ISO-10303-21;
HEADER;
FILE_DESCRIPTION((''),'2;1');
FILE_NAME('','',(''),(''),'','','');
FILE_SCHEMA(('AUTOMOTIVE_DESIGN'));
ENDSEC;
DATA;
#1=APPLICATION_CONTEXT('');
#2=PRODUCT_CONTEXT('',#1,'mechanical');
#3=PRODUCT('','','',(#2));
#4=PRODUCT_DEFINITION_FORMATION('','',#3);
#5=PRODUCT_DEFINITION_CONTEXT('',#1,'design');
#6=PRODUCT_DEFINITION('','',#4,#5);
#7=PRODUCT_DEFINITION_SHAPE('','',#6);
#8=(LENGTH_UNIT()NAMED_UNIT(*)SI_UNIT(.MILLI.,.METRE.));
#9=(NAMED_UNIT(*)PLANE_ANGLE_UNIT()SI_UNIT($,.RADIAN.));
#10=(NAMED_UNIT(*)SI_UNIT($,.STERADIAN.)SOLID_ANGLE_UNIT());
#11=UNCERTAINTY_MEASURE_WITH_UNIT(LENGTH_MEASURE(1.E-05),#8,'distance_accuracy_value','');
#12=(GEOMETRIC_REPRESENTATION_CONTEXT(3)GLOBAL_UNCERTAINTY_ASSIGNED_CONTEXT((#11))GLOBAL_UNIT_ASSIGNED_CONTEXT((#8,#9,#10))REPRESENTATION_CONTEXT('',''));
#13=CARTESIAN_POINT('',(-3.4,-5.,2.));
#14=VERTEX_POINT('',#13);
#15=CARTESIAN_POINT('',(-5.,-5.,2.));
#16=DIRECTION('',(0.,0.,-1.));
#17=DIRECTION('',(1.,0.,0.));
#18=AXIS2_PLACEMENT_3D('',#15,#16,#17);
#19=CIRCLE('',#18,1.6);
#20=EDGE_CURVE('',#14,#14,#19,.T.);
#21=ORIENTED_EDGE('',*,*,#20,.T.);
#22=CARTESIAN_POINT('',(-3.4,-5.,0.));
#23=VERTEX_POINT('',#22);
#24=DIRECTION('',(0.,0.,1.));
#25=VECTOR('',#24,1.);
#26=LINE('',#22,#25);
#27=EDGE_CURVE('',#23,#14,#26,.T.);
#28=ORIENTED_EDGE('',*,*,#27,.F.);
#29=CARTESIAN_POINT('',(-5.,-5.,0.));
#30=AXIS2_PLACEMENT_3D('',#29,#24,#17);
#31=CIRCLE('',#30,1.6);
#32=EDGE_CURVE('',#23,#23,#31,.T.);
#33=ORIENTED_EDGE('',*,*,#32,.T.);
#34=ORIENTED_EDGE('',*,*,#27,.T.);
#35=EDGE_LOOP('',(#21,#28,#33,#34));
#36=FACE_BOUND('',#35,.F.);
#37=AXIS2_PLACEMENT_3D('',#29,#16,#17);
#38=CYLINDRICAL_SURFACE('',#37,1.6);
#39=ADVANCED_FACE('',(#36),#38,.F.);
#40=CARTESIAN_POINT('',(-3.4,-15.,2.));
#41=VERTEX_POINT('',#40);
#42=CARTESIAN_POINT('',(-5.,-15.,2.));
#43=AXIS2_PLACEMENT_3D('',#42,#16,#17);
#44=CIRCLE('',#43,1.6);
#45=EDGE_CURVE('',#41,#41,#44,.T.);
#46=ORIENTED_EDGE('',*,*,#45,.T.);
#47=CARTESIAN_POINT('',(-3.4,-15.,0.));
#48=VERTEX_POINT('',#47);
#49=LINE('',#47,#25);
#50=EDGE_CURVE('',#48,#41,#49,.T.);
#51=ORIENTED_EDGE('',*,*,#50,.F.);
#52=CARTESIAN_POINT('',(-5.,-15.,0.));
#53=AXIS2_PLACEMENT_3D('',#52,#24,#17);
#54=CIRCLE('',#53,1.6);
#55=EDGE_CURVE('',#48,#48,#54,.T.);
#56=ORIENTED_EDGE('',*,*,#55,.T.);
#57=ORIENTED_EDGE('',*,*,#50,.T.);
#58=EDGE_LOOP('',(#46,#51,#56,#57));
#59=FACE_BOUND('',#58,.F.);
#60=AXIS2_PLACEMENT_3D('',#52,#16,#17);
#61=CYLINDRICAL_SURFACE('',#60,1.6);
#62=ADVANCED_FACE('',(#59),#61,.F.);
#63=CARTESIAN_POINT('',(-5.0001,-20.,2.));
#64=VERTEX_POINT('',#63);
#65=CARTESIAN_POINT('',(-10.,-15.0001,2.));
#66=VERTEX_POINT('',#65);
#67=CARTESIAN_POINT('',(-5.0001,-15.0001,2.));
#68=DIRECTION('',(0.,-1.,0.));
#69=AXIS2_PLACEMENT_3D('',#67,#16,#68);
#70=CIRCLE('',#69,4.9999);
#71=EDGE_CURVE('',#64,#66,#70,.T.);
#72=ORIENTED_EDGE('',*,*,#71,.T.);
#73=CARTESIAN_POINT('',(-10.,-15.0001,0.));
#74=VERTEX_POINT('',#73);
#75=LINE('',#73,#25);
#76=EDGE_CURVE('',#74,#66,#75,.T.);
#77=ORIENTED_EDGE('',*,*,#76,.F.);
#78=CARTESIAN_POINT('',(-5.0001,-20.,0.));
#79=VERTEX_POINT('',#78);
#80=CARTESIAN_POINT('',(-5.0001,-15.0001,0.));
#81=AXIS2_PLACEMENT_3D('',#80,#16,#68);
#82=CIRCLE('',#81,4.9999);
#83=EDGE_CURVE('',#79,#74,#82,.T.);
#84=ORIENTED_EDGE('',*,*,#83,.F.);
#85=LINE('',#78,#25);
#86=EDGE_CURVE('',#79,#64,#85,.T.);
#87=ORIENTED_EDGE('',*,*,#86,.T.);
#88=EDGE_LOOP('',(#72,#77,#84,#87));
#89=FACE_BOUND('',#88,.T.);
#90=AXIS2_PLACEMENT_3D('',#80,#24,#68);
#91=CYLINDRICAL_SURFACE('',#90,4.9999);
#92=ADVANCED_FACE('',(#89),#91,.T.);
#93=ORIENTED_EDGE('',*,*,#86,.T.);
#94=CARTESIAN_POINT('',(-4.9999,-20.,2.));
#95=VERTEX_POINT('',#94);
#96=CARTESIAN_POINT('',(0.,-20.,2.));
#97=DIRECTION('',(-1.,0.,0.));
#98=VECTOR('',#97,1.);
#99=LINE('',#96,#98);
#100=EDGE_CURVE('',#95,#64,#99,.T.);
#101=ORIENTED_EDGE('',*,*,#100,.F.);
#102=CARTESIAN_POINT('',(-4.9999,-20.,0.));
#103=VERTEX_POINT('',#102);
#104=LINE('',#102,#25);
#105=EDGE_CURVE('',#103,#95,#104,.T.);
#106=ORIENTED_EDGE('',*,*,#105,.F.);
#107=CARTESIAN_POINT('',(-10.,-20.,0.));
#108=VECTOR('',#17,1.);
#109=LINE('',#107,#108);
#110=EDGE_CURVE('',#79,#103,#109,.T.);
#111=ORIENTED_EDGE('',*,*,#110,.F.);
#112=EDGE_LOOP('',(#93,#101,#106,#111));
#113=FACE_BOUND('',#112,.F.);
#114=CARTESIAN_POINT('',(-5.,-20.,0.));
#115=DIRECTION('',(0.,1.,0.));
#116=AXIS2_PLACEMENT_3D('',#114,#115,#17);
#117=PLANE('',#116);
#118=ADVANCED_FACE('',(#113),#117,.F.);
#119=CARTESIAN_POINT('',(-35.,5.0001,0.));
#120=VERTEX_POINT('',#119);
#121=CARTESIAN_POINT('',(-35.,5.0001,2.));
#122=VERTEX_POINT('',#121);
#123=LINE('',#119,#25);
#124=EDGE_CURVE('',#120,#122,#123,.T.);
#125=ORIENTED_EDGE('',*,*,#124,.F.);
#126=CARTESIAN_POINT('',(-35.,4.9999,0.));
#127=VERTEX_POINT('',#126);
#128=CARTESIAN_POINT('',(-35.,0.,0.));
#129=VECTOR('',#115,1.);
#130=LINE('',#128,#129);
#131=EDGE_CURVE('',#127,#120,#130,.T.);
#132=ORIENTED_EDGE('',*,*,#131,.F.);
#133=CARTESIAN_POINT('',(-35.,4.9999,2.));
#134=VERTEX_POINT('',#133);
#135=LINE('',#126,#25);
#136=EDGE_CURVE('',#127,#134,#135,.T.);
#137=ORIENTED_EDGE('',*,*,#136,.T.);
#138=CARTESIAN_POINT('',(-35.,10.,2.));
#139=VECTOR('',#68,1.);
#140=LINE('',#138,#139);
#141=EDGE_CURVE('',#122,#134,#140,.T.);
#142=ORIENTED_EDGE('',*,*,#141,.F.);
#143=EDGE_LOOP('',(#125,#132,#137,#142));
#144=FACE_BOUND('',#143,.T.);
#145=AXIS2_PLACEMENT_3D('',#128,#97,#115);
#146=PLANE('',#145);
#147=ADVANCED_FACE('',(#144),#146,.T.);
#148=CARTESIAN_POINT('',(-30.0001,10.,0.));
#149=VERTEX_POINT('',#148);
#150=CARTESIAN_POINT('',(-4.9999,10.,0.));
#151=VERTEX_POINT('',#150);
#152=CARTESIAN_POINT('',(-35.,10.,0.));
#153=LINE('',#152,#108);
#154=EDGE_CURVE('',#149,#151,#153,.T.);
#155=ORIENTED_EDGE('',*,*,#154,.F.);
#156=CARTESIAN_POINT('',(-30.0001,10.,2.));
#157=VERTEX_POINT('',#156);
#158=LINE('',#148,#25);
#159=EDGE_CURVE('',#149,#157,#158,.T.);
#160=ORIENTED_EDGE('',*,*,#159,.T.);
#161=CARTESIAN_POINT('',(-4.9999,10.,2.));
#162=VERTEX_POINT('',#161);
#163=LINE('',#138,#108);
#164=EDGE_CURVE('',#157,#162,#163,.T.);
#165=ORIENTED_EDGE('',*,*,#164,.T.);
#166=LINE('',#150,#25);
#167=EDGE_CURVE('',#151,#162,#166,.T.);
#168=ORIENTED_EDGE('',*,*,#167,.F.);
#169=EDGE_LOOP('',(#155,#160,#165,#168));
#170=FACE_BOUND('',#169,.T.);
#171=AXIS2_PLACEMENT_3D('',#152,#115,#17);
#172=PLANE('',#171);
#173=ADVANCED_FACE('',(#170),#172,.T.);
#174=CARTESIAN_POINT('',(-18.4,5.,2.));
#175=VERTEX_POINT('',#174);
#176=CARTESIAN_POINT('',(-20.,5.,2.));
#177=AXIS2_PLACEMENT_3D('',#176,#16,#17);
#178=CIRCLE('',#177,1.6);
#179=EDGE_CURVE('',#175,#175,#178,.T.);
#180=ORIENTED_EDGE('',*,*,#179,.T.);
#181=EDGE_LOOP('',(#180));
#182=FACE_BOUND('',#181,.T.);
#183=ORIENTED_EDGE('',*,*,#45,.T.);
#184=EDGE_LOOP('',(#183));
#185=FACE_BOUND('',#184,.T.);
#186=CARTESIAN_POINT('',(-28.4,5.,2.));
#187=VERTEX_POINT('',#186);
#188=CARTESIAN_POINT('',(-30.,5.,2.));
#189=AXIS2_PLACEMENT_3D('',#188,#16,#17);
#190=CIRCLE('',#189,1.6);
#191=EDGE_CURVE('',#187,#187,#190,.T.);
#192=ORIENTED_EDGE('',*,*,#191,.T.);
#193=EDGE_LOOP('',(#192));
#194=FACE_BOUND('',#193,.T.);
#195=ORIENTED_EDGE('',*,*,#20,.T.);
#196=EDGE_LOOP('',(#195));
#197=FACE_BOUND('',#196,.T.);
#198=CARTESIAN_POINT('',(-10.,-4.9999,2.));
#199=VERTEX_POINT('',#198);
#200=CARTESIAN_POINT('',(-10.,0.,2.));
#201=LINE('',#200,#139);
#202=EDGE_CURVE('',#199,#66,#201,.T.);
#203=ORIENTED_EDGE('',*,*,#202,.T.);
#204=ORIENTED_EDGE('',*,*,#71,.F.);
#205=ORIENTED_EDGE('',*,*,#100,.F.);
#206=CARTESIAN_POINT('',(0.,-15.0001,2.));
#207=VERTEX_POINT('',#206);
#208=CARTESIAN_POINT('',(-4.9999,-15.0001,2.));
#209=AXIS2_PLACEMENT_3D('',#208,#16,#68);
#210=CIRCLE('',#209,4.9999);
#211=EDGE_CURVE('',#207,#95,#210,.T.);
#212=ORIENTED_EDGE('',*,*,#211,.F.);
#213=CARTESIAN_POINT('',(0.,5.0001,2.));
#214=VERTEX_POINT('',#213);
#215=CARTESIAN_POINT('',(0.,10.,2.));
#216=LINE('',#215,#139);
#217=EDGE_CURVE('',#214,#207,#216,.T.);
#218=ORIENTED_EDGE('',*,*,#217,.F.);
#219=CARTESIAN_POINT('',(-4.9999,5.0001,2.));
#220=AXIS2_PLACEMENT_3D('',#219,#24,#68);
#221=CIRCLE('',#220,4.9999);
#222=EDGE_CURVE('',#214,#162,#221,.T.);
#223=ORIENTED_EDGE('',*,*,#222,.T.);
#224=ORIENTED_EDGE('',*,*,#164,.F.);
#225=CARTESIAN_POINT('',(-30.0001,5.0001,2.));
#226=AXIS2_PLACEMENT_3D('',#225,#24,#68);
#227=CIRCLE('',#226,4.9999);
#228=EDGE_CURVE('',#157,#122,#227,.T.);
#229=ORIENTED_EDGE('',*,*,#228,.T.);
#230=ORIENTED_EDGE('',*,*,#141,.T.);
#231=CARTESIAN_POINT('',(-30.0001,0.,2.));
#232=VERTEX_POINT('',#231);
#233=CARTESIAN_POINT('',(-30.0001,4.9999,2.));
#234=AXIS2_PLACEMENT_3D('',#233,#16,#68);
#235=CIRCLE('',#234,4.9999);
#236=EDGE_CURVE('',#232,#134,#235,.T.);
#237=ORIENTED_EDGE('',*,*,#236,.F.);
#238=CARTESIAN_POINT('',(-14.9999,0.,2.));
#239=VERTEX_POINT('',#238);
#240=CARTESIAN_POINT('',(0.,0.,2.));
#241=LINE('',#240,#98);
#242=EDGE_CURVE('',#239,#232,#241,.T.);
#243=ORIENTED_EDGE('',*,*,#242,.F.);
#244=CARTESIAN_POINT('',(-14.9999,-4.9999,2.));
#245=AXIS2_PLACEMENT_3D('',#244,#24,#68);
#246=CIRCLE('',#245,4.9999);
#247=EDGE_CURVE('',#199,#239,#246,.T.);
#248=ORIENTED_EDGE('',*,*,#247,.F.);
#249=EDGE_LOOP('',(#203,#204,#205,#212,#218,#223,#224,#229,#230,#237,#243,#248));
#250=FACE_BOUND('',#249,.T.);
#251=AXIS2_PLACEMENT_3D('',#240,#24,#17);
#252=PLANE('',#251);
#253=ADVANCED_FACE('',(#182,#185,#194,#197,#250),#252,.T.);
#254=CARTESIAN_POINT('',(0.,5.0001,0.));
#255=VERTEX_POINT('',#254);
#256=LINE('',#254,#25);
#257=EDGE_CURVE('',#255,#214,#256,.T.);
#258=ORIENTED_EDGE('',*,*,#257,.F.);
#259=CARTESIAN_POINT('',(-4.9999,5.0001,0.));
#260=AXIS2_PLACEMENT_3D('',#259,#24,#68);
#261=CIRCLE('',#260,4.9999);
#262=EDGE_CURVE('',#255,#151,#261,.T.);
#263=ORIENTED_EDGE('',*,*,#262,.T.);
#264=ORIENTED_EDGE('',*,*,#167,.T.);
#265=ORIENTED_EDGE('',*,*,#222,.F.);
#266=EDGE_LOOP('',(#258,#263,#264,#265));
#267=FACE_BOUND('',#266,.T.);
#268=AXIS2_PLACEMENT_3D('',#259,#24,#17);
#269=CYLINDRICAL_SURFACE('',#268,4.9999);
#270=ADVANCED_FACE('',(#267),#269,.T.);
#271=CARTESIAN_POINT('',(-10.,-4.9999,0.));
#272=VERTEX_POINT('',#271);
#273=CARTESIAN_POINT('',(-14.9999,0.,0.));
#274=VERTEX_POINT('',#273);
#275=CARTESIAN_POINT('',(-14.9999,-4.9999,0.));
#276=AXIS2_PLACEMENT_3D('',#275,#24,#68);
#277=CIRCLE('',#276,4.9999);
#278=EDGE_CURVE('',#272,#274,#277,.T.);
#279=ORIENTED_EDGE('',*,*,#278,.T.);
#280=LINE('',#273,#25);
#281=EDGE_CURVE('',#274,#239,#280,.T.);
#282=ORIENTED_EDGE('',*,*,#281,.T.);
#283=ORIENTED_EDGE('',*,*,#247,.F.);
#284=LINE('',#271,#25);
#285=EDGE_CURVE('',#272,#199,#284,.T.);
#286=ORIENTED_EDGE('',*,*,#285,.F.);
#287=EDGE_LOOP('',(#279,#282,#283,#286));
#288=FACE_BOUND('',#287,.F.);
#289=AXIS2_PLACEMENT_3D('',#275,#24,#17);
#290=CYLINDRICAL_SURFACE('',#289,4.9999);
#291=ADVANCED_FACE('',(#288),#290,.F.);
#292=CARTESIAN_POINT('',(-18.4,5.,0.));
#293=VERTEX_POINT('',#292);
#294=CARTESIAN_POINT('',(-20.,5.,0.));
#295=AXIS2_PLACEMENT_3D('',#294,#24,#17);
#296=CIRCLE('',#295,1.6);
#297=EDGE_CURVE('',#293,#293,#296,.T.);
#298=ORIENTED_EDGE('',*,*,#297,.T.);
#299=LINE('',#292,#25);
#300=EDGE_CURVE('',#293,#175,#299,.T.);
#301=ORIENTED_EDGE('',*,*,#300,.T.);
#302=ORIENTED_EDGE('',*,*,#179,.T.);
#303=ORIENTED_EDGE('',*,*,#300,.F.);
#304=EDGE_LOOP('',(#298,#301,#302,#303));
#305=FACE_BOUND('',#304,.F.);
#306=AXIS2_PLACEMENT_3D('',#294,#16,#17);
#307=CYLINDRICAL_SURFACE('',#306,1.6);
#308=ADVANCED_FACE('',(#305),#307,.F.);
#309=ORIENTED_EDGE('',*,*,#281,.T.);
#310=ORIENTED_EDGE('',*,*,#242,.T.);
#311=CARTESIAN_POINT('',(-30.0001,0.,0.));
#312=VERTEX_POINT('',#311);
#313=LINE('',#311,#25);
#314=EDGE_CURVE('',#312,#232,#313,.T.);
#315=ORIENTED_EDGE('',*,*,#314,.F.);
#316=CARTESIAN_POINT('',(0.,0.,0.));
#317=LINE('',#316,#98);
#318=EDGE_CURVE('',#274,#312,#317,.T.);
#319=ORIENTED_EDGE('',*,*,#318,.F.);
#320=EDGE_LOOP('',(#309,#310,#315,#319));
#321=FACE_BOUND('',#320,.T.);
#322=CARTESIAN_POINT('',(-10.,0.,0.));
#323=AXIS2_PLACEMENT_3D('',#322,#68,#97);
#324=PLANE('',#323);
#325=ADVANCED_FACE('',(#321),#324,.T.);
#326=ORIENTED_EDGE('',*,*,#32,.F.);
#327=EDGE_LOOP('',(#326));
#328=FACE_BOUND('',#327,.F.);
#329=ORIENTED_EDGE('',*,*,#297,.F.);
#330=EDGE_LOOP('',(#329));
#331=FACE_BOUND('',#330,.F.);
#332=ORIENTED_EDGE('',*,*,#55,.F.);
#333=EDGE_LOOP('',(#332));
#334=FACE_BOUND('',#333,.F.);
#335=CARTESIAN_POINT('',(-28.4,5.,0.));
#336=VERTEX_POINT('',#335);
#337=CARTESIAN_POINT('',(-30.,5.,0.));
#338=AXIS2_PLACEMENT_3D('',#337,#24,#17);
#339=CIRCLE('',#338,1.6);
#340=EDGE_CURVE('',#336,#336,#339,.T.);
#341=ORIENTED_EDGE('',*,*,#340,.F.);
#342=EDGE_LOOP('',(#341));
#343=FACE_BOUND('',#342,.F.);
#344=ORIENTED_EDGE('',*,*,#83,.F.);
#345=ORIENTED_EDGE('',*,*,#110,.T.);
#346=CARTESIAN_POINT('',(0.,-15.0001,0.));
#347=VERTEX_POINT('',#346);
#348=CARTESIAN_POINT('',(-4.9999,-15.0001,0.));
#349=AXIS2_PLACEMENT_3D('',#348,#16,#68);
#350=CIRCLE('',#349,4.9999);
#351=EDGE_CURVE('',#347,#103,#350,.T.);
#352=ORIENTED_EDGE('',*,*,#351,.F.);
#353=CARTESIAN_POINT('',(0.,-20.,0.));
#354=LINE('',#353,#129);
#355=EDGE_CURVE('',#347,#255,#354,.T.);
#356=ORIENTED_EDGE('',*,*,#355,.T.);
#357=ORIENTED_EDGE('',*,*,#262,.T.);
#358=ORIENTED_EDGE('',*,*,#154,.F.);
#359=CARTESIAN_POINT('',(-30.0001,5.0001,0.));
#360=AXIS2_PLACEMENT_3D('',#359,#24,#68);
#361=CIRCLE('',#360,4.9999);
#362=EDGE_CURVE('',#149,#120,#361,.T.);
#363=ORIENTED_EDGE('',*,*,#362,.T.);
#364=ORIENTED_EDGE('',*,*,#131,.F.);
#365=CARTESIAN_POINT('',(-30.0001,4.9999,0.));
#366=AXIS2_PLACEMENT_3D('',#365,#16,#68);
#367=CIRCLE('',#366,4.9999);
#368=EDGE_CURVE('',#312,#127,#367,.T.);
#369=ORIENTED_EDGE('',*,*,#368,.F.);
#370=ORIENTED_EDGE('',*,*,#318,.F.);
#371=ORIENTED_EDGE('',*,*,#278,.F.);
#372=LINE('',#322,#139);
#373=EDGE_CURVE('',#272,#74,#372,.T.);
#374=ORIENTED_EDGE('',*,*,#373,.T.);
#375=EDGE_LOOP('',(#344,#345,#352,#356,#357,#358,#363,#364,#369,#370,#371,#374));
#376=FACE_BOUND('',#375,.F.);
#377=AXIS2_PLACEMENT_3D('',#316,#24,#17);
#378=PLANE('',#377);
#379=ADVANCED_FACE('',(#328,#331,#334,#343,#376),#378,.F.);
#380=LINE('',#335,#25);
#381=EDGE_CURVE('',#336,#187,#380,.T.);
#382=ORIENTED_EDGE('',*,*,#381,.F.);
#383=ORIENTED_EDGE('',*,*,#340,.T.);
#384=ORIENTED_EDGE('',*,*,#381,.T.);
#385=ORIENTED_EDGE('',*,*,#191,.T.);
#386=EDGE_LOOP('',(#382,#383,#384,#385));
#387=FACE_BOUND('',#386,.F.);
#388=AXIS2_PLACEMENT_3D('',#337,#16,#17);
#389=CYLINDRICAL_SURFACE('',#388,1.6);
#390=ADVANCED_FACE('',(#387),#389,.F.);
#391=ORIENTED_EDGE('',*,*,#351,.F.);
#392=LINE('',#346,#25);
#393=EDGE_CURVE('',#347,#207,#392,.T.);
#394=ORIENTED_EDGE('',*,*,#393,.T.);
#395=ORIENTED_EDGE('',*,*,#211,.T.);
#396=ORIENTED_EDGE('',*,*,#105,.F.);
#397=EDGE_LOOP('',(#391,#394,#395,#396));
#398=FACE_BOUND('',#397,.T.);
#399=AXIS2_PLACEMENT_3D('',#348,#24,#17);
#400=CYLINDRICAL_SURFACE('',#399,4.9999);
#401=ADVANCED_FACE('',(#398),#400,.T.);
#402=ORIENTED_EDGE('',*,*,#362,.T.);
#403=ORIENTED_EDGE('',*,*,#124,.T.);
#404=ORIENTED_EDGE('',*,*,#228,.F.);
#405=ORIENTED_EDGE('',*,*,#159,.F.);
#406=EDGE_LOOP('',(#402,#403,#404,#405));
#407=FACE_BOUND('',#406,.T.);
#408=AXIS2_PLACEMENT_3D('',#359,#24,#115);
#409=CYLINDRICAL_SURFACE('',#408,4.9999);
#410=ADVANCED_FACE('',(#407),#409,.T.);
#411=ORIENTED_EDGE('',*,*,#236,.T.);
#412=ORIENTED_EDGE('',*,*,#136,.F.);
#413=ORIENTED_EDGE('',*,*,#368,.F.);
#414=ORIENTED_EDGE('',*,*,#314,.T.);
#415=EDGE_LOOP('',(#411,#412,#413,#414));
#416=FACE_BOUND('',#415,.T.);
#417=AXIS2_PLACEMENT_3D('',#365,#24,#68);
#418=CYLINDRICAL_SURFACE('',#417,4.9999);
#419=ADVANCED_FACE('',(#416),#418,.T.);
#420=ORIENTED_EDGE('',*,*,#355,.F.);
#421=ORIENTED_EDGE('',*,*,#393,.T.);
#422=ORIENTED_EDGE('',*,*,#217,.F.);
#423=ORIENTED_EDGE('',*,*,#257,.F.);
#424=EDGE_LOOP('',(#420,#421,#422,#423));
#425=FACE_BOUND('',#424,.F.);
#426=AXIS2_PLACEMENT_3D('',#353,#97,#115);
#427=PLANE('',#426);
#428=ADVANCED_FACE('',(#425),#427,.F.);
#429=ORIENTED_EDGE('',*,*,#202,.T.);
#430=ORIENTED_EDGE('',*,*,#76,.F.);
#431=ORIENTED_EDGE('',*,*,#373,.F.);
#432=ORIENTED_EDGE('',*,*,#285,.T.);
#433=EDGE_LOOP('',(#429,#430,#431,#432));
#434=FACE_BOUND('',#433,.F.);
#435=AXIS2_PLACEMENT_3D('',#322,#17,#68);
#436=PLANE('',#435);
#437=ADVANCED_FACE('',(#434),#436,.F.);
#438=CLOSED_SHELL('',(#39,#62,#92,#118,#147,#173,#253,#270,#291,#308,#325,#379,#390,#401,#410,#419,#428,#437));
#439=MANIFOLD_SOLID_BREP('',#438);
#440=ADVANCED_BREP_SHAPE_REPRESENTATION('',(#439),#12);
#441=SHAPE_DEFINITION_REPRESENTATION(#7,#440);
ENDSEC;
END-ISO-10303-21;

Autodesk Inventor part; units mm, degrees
ref_plane "YZ Plane" through (0, 0, 0) normal (1, 0, 0) x (0, 1, 0)
ref_plane "XZ Plane" through (0, 0, 0) normal (0, 1, 0) x (-1, 0, 0)
ref_plane "XY Plane" through (0, 0, 0) normal (0, 0, 1) x (1, 0, 0)
sketch "スケッチ1" plane through (0, 0, 0) normal (0, 0, 1) x (1, 0, 0)
  line L0 (0, 0) -> (-10, 0)
  line L1 (-10, 0) -> (-10, -20)
  line L2 (-10, -20) -> (0, -20)
  line L3 (0, -20) -> (0, 0)
  line L4 (0, 0) -> (-35, 0)
  line L5 (-35, 0) -> (-35, 10)
  line L6 (-35, 10) -> (0, 10)
  line L7 (0, 10) -> (0, 0)
  line L8 (-5, -20) -> (-5, 0)
  line L9 (0, 5) -> (-35, 5)
  circle A0 centre (-10, 5) radius 1.6
  circle A1 centre (-5, -5) radius 1.6
  circle A2 centre (-20, 5) radius 1.6
  circle A3 centre (-30, 5) radius 1.6
  circle A4 centre (-5, -15) radius 1.6
  circle A5 centre (-5, -25) radius 1.6
  dimension "d0" = 10
  dimension "d1" = 20
  dimension "d2" = 35
  dimension "d3" = 10
  dimension "d4" = 3.2
  dimension "d5" = 3.2
  dimension "d6" = 10
  dimension "d7" = 5
  dimension "d11" = 10
  dimension "d18" = 10
extrude "押し出し1" add sketch "スケッチ1" along normal blind 2 contours L3 L2 L8 A4 A1 L0 | L0 L4 L5 L9 A3 A2 A0 L7 | L8 A1 A4 L2 L1 L0 | L9 A0 A2 A3 L5 L6 L7 | A0 L9 | L9 A0
fillet "フィレット1" radius 5 6 edges at (0, 10, 1) (-35, 10, 1) (-35, 0, 1) (0, -20, 1) (-10, -20, 1) (-10, 0, 1)
properties part number "kakutome_nc"
